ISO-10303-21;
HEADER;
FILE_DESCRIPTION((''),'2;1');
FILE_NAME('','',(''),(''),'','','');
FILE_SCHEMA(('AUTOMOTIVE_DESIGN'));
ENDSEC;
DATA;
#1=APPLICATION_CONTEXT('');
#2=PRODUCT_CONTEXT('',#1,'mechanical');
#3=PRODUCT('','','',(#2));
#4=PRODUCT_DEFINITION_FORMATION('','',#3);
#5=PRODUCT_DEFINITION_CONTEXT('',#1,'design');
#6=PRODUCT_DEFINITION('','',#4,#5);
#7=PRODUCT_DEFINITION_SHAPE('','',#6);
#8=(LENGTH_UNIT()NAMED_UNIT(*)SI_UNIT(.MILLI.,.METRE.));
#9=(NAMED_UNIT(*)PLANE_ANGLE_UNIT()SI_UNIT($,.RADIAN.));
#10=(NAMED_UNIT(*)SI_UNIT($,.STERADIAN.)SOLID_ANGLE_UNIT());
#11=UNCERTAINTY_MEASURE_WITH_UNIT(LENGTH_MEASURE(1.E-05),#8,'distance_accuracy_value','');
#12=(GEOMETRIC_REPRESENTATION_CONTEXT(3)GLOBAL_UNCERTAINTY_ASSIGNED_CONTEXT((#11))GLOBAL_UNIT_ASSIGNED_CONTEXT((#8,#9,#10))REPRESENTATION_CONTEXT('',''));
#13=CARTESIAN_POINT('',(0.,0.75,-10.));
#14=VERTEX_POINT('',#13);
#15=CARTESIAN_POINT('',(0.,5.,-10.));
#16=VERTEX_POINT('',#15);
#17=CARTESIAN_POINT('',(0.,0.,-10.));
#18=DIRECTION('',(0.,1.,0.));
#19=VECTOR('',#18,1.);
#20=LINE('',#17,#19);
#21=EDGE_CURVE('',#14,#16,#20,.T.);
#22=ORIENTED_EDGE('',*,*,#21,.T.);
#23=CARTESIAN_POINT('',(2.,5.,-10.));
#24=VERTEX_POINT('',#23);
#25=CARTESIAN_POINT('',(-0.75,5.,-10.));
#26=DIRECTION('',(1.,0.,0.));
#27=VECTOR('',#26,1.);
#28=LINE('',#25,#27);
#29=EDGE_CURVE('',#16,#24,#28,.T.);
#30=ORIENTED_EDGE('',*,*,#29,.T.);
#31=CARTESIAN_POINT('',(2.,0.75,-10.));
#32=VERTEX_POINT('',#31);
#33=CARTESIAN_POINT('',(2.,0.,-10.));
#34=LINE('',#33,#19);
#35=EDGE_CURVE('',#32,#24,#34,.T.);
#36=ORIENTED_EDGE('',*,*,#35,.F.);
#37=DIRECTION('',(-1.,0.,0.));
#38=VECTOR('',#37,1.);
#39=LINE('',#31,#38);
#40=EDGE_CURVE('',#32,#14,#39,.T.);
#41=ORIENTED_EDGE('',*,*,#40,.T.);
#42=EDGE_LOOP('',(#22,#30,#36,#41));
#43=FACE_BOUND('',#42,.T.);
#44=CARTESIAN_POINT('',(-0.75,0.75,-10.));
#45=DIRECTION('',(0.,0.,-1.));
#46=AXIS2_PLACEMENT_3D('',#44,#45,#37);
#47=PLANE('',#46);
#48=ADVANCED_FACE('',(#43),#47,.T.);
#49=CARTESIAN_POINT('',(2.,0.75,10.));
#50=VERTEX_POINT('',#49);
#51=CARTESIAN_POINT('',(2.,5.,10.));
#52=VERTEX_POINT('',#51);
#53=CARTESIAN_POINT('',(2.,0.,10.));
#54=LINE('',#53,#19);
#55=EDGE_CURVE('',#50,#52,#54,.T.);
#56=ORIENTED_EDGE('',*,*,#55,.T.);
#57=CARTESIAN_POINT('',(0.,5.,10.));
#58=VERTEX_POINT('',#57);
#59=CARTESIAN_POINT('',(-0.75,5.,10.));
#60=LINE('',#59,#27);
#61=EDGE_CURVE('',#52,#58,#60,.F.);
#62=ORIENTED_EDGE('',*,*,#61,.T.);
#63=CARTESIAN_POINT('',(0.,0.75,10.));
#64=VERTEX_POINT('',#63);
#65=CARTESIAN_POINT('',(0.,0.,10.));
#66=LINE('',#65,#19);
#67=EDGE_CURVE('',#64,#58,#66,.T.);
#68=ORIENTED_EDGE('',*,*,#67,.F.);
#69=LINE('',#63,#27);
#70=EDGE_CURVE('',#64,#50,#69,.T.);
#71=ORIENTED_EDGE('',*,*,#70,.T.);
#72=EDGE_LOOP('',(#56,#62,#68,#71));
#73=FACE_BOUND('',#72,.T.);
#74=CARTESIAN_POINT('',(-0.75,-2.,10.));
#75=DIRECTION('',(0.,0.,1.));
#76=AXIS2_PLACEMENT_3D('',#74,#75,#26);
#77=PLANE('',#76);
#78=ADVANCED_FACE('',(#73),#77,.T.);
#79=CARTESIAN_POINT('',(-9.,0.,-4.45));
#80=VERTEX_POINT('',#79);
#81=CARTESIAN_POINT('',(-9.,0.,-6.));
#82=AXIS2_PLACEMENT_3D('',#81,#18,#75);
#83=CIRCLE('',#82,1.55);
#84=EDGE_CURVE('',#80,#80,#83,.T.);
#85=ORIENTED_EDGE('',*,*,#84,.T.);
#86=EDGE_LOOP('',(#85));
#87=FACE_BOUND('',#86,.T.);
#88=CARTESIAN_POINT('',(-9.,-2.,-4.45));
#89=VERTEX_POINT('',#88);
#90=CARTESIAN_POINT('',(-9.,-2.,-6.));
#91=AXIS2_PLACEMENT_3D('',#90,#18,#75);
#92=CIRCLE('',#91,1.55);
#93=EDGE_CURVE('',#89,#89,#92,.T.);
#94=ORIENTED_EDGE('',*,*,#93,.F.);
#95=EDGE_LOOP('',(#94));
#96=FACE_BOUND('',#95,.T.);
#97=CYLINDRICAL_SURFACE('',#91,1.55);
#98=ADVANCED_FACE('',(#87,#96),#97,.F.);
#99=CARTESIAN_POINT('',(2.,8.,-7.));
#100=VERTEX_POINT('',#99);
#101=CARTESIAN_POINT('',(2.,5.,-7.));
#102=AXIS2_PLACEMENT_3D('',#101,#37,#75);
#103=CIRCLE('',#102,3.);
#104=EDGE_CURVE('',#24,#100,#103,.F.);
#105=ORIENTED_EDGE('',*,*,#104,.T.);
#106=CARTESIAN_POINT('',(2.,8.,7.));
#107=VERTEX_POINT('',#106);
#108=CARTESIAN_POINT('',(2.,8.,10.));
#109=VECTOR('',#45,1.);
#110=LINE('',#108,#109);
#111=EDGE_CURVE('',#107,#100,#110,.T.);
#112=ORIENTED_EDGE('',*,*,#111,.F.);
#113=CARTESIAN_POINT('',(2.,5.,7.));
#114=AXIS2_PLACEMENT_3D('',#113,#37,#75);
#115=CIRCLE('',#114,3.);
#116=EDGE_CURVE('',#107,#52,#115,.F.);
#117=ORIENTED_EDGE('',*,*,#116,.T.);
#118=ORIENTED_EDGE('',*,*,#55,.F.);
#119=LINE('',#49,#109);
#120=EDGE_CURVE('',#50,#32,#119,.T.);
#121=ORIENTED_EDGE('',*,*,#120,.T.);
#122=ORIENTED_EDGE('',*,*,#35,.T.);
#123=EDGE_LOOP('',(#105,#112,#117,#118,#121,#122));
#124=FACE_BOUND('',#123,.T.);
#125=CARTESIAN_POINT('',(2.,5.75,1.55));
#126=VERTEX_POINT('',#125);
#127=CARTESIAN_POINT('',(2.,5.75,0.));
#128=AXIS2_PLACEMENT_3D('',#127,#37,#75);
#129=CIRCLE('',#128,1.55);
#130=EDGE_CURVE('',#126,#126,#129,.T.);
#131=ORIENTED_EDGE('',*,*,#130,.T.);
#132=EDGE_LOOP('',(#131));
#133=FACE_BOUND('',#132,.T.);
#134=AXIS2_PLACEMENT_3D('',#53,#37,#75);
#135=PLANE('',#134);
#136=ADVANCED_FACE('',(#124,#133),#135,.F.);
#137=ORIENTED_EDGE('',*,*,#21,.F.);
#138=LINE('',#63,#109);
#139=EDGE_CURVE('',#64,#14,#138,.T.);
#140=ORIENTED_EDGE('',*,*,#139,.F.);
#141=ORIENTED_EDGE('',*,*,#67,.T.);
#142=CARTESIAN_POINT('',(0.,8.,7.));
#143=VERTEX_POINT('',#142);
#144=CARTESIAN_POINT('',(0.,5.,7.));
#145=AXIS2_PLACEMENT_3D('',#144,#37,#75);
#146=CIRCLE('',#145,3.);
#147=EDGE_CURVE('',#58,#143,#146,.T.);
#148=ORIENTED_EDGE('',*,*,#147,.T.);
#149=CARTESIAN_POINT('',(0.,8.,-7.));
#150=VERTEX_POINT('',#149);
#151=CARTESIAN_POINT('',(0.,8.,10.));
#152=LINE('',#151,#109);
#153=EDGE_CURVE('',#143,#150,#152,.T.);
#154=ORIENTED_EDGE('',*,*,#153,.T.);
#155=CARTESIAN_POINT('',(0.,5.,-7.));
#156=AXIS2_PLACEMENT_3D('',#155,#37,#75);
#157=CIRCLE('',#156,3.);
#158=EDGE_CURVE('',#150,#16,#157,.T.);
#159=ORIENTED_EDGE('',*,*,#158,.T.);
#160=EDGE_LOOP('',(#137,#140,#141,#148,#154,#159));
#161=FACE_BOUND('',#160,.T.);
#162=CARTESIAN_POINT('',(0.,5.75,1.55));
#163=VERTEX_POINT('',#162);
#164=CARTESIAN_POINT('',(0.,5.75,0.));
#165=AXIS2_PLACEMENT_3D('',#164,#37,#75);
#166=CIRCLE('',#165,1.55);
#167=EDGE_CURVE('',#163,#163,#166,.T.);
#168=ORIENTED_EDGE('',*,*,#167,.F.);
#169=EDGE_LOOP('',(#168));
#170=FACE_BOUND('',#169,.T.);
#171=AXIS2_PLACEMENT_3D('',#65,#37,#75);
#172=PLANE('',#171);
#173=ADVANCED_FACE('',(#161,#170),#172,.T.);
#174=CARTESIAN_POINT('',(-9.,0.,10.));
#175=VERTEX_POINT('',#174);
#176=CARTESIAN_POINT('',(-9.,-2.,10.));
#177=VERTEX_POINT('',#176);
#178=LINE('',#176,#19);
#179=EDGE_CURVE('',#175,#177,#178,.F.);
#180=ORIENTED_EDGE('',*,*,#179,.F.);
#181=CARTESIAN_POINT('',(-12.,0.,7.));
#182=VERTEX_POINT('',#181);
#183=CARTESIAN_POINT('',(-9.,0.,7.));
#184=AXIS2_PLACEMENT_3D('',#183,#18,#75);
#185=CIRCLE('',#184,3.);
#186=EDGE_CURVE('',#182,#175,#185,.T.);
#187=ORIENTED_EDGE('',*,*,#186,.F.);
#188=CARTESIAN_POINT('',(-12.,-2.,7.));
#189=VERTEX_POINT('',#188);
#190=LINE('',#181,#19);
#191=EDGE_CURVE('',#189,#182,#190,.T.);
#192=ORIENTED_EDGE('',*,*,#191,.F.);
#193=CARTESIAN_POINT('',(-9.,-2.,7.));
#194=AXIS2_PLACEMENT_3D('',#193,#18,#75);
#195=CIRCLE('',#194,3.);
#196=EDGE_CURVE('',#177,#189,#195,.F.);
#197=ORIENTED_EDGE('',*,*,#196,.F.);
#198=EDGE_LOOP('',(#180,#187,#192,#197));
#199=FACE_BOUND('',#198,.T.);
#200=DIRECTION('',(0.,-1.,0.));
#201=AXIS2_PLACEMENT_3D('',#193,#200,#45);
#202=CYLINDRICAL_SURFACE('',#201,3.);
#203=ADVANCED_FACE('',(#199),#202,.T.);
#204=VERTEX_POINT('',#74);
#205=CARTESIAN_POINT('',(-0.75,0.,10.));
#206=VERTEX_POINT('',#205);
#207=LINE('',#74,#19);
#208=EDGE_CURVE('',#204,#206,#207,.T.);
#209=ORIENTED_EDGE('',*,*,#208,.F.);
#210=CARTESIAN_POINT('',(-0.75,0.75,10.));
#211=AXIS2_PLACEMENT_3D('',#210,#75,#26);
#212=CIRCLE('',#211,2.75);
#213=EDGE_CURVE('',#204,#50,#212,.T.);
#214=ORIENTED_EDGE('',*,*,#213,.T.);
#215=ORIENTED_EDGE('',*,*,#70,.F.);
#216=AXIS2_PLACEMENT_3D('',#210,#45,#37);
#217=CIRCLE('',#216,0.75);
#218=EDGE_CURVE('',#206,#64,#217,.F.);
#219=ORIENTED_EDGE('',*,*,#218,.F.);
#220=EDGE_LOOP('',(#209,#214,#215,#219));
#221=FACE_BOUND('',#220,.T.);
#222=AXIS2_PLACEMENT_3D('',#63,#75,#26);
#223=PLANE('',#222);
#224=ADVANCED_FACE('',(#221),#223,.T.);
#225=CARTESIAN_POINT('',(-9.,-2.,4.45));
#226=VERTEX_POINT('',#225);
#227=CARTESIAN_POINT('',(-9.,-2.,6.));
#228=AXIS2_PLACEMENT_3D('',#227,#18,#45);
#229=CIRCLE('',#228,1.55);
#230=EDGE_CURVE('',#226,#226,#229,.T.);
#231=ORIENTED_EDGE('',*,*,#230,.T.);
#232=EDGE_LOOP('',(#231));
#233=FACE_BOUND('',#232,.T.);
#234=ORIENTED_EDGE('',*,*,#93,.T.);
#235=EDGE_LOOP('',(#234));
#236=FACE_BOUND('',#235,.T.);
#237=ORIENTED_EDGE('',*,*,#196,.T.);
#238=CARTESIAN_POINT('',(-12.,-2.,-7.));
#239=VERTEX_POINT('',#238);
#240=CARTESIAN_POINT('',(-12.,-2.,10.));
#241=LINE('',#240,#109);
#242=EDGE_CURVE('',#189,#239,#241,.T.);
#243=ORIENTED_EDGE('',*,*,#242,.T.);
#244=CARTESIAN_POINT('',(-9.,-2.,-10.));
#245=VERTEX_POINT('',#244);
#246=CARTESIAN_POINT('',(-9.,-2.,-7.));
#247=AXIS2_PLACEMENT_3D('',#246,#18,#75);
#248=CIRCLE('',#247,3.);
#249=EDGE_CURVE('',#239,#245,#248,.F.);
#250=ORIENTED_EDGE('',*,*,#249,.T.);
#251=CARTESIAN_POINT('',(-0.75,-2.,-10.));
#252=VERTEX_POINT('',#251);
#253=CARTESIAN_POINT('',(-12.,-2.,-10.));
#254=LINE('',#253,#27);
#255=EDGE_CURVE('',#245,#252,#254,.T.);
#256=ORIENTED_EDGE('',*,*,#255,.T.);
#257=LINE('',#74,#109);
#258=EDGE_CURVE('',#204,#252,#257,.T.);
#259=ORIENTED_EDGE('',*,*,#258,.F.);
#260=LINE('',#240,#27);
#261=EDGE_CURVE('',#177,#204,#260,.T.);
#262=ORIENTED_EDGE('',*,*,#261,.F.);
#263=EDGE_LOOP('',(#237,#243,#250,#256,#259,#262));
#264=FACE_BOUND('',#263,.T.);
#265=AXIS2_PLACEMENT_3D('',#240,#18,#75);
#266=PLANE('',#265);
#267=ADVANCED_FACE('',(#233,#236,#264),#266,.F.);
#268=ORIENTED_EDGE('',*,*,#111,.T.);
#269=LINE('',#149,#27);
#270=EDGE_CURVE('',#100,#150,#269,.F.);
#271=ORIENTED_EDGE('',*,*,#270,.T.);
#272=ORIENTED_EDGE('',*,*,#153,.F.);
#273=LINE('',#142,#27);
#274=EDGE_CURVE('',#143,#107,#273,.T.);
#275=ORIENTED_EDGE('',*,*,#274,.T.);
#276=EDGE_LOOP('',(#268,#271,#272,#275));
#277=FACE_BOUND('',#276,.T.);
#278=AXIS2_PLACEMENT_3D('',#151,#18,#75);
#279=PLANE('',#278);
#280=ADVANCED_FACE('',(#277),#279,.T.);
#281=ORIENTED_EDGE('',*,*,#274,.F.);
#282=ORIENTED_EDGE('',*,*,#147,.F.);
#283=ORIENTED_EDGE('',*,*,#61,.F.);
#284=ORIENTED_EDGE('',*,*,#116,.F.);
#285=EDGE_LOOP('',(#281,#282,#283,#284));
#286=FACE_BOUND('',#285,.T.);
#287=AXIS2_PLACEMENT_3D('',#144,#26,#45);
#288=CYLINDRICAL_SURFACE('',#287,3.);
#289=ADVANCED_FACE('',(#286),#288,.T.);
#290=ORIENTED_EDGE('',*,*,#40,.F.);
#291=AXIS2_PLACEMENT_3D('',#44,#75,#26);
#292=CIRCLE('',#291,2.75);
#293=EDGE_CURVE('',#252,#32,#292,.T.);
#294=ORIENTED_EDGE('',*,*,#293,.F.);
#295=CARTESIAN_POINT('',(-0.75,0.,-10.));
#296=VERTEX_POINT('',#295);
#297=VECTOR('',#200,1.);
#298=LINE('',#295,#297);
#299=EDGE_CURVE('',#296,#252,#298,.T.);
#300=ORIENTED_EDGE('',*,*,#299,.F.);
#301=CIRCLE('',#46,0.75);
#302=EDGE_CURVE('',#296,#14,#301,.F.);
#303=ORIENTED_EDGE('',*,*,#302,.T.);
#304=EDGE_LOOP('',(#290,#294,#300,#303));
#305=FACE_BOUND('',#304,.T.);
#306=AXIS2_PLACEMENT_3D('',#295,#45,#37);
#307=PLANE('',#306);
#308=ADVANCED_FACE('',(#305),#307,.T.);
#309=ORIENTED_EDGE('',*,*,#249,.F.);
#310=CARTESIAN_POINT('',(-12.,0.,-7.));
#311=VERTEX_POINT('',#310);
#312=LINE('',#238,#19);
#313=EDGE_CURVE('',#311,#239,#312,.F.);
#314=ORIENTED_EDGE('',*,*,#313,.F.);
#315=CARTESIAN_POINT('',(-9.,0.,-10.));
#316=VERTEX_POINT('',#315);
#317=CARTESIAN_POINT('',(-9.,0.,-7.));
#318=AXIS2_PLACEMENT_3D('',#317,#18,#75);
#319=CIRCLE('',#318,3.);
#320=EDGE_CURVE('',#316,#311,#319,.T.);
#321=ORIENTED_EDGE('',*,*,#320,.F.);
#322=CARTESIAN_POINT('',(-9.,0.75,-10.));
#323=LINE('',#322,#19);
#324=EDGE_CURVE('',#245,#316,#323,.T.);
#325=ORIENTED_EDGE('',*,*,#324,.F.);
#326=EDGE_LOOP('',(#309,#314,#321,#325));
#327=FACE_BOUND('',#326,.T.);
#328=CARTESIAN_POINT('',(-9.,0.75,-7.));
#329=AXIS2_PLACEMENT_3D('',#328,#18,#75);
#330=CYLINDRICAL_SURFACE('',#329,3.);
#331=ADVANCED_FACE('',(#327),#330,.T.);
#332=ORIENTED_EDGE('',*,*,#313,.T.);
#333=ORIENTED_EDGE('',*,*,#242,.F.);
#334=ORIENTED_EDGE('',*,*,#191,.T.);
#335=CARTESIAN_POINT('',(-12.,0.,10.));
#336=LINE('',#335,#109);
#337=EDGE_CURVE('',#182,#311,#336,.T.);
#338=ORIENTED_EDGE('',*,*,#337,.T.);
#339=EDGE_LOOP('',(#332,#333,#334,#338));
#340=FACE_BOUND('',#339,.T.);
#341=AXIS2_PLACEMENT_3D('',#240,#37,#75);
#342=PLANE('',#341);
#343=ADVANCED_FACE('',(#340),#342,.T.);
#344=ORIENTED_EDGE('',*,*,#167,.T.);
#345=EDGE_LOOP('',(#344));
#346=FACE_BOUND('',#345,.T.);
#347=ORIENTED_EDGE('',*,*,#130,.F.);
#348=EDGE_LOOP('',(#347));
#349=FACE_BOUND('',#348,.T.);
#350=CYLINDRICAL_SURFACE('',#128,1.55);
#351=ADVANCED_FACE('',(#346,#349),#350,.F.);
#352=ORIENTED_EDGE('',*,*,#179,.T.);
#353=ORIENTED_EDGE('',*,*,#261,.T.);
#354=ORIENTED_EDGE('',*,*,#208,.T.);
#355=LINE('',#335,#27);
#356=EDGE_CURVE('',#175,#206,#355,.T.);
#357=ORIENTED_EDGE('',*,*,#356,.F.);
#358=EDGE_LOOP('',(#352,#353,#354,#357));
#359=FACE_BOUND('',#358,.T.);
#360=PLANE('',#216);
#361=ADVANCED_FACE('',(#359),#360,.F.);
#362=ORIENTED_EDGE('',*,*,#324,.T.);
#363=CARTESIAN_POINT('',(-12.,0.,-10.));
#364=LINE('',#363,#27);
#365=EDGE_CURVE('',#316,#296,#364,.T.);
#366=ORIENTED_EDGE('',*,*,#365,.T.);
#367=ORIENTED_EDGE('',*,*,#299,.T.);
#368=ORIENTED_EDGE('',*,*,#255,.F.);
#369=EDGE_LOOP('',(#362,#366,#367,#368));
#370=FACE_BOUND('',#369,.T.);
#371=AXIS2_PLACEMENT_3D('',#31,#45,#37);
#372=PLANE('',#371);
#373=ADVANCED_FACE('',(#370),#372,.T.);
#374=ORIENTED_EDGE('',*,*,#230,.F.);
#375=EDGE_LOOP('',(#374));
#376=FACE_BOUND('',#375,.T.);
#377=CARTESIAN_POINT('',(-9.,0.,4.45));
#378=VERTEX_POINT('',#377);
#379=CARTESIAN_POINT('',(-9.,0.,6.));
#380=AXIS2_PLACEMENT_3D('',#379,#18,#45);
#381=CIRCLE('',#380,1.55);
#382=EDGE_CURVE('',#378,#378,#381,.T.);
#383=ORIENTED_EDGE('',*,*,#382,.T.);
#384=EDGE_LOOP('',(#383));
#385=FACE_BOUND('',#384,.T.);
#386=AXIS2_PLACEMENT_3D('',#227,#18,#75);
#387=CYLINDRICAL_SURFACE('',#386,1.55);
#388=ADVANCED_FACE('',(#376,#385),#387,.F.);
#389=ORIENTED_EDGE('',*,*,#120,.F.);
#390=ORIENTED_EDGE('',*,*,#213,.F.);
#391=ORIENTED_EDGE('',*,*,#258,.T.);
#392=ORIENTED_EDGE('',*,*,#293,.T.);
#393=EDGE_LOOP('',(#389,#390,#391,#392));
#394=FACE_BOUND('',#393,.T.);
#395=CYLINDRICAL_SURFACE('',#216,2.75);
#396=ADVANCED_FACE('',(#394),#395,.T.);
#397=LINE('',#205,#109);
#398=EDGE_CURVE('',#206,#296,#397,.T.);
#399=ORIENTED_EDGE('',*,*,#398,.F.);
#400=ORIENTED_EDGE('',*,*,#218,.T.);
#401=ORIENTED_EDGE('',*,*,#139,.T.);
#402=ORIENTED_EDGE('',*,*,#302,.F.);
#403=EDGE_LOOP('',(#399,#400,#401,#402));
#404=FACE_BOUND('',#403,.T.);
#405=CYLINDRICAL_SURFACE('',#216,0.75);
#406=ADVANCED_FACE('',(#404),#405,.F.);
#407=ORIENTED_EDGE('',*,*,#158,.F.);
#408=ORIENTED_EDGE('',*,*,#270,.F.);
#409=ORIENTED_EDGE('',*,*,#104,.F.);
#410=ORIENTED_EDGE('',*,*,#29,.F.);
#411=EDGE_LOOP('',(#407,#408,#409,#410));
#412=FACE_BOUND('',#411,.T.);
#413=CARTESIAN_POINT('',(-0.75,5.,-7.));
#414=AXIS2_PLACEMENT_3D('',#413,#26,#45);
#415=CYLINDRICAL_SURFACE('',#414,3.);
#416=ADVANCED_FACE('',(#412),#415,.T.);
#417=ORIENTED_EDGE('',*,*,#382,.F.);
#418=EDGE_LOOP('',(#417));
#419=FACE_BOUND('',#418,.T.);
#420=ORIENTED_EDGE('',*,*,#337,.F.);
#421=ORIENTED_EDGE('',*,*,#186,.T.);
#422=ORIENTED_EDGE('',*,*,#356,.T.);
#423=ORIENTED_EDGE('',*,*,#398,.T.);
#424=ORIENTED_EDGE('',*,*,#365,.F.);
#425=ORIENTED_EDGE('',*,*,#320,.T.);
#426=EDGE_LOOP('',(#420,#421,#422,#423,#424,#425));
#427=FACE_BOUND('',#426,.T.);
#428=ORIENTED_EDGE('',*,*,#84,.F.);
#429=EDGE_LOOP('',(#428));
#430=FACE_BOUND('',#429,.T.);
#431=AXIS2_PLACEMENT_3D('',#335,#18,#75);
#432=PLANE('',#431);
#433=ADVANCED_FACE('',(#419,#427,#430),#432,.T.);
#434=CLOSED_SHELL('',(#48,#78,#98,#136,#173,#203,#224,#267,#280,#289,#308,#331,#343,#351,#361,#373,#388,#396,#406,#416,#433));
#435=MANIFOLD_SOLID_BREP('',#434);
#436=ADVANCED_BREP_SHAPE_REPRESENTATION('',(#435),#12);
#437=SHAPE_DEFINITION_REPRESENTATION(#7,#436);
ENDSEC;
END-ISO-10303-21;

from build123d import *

# Parameters (mm, degrees)
BASE_FLANGE1_DEPTH = 10
FILLET1_R          = 3
SKETCH6_R          = 1.55
CUT_EXTRUDE1_DEPTH = 18.549928775
SKETCH7_R          = 1.55
CUT_EXTRUDE2_DEPTH = 18.549928775


# Sheet-metal steps are written as plain solids
with BuildPart() as part:
    # Sketch1 → Base-Flange1 (new, symmetric)
    with BuildSketch(Plane.XY):
        with BuildLine():
            Line((-12, 0), (-0.75, 0))
            ThreePointArc((-0.75, 0), (-0.219669914, 0.219669914), (0, 0.75))
            Line((0, 0.75), (0, 8))
            Line((0, 8), (2, 8))
            Line((2, 8), (2, 0.75))
            ThreePointArc((2, 0.75), (1.194543648, -1.194543648), (-0.75, -2))
            Line((-0.75, -2), (-12, -2))
            Line((-12, -2), (-12, 0))
        make_face()
    extrude(amount=BASE_FLANGE1_DEPTH, both=True)

    # Fillet1
    fillet1_edges = [part.edges().sort_by_distance(p)[0] for p in [
        (-12, -1, 10),
        (1, 8, 10),
        (-12, -1, -10),
        (1, 8, -10),
    ]]
    fillet(fillet1_edges, radius=FILLET1_R)

    # Sketch6 → Cut-Extrude1 (cut, through all)
    with BuildSketch(Plane(origin=(0, 0, 0), x_dir=(1, 0, 0), z_dir=(0, 1, 0))):
        with Locations(Location((-9, 6, 0), (0, 0, 270))):
            Circle(SKETCH6_R)
        with Locations(Location((-9, -6, 0), (0, 0, 90))):
            Circle(SKETCH6_R)
    extrude(amount=-CUT_EXTRUDE1_DEPTH, mode=Mode.SUBTRACT)

    # Sketch7 → Cut-Extrude2 (cut, through all)
    with BuildSketch(Plane.ZY):
        with Locations((0, 5.75)):
            Circle(SKETCH7_R)
    extrude(amount=-CUT_EXTRUDE2_DEPTH, mode=Mode.SUBTRACT)


solid = part.part
